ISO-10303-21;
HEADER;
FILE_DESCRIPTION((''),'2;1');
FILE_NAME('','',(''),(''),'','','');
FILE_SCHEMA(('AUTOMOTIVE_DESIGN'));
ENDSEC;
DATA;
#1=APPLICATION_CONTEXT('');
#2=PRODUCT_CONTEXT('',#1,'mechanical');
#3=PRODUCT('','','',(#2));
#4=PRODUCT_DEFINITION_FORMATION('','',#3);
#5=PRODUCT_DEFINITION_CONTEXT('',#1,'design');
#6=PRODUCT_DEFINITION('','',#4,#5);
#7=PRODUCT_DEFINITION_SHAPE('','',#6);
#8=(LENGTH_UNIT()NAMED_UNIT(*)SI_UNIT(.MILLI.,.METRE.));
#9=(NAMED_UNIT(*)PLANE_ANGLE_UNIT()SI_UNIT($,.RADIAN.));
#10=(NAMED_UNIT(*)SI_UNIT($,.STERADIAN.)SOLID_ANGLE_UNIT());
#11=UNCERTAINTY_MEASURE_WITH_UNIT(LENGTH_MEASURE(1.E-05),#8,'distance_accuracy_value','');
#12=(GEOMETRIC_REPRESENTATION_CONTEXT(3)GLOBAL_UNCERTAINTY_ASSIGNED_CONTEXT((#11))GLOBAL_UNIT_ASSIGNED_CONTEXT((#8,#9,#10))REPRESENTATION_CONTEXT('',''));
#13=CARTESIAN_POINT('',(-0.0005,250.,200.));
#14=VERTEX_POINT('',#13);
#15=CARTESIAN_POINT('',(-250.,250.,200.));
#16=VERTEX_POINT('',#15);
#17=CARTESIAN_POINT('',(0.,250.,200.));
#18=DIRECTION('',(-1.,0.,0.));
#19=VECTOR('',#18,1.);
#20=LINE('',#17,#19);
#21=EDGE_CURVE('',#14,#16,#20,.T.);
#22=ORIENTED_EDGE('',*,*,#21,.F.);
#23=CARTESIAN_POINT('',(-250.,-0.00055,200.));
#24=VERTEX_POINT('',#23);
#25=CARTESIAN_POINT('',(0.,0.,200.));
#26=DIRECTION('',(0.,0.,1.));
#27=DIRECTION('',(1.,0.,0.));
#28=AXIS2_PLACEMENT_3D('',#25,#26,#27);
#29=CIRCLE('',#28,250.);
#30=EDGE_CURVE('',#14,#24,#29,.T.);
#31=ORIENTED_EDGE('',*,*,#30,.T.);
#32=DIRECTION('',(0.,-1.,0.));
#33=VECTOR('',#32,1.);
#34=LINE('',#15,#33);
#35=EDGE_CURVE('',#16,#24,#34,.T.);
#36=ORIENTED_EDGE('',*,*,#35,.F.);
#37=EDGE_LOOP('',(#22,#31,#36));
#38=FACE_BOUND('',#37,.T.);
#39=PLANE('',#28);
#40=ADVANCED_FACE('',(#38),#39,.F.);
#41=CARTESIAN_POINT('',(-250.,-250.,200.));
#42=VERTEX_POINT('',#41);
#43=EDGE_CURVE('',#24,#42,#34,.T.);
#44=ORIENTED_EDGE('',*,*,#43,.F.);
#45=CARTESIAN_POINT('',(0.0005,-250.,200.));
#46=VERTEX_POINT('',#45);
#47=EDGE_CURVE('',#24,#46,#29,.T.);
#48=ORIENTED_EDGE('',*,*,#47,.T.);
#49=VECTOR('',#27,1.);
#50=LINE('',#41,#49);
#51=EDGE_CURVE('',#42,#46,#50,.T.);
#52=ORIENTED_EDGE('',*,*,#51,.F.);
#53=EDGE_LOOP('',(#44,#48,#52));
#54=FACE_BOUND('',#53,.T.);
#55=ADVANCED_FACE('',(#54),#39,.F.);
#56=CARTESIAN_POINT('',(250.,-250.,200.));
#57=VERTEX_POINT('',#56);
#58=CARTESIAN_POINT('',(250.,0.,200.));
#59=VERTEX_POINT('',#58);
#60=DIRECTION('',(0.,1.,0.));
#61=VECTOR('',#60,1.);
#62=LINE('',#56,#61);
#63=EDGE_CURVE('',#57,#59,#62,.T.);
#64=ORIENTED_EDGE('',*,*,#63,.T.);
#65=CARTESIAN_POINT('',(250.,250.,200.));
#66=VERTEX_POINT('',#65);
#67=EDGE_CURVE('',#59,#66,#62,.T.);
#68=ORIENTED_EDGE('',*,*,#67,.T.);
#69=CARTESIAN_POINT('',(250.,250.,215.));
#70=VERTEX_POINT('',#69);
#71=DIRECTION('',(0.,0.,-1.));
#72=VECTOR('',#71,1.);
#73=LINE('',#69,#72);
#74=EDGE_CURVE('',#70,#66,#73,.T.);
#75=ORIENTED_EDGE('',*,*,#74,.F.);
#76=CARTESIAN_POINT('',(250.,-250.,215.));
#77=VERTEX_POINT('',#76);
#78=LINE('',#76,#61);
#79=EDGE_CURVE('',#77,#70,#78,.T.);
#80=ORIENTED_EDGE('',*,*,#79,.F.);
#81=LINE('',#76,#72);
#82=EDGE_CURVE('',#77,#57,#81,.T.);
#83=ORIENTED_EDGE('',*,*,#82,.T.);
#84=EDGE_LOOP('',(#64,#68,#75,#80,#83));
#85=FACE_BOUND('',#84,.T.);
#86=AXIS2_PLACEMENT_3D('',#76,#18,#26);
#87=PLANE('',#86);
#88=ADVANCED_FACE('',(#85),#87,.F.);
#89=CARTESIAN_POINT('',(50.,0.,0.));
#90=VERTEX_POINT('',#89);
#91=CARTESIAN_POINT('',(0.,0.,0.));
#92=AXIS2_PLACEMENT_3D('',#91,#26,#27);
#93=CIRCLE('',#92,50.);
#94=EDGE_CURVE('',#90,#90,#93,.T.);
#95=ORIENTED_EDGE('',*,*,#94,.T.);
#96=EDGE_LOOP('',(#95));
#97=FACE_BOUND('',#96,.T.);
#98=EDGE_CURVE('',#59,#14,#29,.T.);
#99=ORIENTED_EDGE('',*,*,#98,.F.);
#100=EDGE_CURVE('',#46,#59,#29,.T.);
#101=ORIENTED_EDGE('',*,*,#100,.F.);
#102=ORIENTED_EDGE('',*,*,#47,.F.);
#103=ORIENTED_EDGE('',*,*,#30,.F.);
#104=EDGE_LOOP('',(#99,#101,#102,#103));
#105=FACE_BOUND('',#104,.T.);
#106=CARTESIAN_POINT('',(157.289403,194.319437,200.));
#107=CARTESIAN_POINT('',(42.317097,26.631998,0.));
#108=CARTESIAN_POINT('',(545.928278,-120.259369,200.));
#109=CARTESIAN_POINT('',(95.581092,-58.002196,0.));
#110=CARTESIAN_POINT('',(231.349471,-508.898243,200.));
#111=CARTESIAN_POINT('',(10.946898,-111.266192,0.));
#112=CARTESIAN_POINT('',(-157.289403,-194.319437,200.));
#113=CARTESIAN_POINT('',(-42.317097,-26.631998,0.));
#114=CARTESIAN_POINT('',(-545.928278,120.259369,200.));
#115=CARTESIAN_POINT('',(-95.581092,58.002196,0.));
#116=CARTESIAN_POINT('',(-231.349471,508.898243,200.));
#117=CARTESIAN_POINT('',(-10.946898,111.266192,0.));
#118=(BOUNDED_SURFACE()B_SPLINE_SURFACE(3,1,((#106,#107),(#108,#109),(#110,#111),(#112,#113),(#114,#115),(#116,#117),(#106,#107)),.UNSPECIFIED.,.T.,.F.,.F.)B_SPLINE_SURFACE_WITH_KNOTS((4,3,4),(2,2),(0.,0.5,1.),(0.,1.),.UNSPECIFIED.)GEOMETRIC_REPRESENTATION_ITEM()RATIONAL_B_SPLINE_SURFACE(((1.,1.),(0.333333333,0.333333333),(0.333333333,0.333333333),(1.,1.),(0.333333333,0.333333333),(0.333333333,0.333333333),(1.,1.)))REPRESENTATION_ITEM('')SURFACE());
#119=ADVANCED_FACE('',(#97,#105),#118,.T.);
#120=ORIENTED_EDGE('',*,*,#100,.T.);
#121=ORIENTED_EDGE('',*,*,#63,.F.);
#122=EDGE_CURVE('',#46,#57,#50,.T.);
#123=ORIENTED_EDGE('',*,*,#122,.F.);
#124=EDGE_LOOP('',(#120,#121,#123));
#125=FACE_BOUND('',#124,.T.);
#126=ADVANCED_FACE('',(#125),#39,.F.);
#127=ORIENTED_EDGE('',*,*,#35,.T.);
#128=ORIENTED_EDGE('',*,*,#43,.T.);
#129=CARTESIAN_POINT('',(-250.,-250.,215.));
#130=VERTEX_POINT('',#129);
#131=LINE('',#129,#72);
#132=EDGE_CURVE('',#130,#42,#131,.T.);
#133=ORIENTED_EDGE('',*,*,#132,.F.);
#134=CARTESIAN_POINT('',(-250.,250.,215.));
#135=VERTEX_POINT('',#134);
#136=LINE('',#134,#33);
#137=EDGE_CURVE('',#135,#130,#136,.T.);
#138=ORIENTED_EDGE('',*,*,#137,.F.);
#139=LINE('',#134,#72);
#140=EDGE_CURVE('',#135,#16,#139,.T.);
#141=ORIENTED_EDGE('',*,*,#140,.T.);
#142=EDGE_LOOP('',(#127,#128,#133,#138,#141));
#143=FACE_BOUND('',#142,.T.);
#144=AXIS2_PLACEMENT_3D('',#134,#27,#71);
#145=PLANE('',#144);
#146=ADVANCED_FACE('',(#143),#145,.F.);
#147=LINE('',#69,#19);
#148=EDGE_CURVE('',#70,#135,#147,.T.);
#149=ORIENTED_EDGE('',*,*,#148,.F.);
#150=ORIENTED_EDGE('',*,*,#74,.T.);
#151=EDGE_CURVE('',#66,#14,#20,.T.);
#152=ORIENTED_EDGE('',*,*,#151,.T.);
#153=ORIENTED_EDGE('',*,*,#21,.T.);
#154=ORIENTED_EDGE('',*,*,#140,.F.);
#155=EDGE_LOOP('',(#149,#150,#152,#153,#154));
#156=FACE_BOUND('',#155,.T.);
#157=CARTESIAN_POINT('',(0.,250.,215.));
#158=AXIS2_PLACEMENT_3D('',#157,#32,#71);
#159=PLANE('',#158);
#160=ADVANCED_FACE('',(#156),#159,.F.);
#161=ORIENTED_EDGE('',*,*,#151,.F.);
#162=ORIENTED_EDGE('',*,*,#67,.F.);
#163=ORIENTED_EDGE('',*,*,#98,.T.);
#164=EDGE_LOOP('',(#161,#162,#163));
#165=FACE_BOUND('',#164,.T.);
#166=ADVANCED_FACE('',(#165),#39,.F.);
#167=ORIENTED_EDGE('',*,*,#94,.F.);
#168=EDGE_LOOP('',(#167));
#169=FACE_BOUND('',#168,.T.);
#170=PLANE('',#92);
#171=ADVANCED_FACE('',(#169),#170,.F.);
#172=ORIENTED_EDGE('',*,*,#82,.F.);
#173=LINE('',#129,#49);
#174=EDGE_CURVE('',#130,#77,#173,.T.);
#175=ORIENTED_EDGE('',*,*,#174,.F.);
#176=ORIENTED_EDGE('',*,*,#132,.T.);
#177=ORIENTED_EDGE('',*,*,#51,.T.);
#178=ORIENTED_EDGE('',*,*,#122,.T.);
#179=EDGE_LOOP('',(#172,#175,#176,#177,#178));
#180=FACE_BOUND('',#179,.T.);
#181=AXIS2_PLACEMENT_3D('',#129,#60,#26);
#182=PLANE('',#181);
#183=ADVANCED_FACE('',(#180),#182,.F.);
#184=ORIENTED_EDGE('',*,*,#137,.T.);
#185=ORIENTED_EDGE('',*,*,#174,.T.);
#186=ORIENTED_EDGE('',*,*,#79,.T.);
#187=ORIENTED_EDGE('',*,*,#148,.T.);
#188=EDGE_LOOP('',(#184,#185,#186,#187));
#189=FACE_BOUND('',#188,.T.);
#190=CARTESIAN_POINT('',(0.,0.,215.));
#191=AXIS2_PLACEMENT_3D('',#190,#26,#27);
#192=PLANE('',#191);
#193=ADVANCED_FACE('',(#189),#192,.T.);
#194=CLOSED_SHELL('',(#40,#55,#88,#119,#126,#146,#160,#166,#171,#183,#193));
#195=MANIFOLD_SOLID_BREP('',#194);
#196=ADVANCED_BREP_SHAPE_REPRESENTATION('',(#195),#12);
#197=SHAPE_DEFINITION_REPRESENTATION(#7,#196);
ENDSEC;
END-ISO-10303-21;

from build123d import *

# Parameters (mm, degrees)
EXTRUDE_1_DEPTH = 15


with BuildPart() as part:
    # 放样1: read off the stored shape, not the designer's step
    # 放样1: loft between two sections, ruled curve by curve
    loft_1_from = [
        Edge.make_bspline([(157.289403045, 194.319437241, 200), (545.928277528, -120.259368848, 200), (231.349471438, -508.898243331, 200), (-157.289403045, -194.319437241, 200), (-545.928277528, 120.259368848, 200), (-231.349471438, 508.898243331, 200), (157.289403045, 194.319437241, 200)], [0, 0, 0, 0, 0.5, 0.5, 0.5, 1, 1, 1, 1], 3, [1, 0.333333333, 0.333333333, 1, 0.333333333, 0.333333333, 1]),
    ]
    loft_1_to = [
        Edge.make_bspline([(42.317097013, 26.631997679, 0), (95.581092372, -58.002196347, 0), (10.946898346, -111.266191705, 0), (-42.317097013, -26.631997679, 0), (-95.581092372, 58.002196347, 0), (-10.946898346, 111.266191705, 0), (42.317097013, 26.631997679, 0)], [0, 0, 0, 0, 0.5, 0.5, 0.5, 1, 1, 1, 1], 3, [1, 0.333333333, 0.333333333, 1, 0.333333333, 0.333333333, 1]),
    ]
    loft_1 = Solid(Shell([*[Face.make_surface_from_curves(loft_1_from[k], loft_1_to[k]) for k in range(1)], Face(Wire(loft_1_from)), Face(Wire(loft_1_to))]))
    add(loft_1)

    # 草图4 → 凸台-拉伸1 (add)
    with BuildSketch(Plane.XY.offset(200)):
        Polygon((0, 250), (-250, 250), (-250, -250), (250, -250), (250, 250), align=None)
    extrude(amount=EXTRUDE_1_DEPTH)


solid = part.part
